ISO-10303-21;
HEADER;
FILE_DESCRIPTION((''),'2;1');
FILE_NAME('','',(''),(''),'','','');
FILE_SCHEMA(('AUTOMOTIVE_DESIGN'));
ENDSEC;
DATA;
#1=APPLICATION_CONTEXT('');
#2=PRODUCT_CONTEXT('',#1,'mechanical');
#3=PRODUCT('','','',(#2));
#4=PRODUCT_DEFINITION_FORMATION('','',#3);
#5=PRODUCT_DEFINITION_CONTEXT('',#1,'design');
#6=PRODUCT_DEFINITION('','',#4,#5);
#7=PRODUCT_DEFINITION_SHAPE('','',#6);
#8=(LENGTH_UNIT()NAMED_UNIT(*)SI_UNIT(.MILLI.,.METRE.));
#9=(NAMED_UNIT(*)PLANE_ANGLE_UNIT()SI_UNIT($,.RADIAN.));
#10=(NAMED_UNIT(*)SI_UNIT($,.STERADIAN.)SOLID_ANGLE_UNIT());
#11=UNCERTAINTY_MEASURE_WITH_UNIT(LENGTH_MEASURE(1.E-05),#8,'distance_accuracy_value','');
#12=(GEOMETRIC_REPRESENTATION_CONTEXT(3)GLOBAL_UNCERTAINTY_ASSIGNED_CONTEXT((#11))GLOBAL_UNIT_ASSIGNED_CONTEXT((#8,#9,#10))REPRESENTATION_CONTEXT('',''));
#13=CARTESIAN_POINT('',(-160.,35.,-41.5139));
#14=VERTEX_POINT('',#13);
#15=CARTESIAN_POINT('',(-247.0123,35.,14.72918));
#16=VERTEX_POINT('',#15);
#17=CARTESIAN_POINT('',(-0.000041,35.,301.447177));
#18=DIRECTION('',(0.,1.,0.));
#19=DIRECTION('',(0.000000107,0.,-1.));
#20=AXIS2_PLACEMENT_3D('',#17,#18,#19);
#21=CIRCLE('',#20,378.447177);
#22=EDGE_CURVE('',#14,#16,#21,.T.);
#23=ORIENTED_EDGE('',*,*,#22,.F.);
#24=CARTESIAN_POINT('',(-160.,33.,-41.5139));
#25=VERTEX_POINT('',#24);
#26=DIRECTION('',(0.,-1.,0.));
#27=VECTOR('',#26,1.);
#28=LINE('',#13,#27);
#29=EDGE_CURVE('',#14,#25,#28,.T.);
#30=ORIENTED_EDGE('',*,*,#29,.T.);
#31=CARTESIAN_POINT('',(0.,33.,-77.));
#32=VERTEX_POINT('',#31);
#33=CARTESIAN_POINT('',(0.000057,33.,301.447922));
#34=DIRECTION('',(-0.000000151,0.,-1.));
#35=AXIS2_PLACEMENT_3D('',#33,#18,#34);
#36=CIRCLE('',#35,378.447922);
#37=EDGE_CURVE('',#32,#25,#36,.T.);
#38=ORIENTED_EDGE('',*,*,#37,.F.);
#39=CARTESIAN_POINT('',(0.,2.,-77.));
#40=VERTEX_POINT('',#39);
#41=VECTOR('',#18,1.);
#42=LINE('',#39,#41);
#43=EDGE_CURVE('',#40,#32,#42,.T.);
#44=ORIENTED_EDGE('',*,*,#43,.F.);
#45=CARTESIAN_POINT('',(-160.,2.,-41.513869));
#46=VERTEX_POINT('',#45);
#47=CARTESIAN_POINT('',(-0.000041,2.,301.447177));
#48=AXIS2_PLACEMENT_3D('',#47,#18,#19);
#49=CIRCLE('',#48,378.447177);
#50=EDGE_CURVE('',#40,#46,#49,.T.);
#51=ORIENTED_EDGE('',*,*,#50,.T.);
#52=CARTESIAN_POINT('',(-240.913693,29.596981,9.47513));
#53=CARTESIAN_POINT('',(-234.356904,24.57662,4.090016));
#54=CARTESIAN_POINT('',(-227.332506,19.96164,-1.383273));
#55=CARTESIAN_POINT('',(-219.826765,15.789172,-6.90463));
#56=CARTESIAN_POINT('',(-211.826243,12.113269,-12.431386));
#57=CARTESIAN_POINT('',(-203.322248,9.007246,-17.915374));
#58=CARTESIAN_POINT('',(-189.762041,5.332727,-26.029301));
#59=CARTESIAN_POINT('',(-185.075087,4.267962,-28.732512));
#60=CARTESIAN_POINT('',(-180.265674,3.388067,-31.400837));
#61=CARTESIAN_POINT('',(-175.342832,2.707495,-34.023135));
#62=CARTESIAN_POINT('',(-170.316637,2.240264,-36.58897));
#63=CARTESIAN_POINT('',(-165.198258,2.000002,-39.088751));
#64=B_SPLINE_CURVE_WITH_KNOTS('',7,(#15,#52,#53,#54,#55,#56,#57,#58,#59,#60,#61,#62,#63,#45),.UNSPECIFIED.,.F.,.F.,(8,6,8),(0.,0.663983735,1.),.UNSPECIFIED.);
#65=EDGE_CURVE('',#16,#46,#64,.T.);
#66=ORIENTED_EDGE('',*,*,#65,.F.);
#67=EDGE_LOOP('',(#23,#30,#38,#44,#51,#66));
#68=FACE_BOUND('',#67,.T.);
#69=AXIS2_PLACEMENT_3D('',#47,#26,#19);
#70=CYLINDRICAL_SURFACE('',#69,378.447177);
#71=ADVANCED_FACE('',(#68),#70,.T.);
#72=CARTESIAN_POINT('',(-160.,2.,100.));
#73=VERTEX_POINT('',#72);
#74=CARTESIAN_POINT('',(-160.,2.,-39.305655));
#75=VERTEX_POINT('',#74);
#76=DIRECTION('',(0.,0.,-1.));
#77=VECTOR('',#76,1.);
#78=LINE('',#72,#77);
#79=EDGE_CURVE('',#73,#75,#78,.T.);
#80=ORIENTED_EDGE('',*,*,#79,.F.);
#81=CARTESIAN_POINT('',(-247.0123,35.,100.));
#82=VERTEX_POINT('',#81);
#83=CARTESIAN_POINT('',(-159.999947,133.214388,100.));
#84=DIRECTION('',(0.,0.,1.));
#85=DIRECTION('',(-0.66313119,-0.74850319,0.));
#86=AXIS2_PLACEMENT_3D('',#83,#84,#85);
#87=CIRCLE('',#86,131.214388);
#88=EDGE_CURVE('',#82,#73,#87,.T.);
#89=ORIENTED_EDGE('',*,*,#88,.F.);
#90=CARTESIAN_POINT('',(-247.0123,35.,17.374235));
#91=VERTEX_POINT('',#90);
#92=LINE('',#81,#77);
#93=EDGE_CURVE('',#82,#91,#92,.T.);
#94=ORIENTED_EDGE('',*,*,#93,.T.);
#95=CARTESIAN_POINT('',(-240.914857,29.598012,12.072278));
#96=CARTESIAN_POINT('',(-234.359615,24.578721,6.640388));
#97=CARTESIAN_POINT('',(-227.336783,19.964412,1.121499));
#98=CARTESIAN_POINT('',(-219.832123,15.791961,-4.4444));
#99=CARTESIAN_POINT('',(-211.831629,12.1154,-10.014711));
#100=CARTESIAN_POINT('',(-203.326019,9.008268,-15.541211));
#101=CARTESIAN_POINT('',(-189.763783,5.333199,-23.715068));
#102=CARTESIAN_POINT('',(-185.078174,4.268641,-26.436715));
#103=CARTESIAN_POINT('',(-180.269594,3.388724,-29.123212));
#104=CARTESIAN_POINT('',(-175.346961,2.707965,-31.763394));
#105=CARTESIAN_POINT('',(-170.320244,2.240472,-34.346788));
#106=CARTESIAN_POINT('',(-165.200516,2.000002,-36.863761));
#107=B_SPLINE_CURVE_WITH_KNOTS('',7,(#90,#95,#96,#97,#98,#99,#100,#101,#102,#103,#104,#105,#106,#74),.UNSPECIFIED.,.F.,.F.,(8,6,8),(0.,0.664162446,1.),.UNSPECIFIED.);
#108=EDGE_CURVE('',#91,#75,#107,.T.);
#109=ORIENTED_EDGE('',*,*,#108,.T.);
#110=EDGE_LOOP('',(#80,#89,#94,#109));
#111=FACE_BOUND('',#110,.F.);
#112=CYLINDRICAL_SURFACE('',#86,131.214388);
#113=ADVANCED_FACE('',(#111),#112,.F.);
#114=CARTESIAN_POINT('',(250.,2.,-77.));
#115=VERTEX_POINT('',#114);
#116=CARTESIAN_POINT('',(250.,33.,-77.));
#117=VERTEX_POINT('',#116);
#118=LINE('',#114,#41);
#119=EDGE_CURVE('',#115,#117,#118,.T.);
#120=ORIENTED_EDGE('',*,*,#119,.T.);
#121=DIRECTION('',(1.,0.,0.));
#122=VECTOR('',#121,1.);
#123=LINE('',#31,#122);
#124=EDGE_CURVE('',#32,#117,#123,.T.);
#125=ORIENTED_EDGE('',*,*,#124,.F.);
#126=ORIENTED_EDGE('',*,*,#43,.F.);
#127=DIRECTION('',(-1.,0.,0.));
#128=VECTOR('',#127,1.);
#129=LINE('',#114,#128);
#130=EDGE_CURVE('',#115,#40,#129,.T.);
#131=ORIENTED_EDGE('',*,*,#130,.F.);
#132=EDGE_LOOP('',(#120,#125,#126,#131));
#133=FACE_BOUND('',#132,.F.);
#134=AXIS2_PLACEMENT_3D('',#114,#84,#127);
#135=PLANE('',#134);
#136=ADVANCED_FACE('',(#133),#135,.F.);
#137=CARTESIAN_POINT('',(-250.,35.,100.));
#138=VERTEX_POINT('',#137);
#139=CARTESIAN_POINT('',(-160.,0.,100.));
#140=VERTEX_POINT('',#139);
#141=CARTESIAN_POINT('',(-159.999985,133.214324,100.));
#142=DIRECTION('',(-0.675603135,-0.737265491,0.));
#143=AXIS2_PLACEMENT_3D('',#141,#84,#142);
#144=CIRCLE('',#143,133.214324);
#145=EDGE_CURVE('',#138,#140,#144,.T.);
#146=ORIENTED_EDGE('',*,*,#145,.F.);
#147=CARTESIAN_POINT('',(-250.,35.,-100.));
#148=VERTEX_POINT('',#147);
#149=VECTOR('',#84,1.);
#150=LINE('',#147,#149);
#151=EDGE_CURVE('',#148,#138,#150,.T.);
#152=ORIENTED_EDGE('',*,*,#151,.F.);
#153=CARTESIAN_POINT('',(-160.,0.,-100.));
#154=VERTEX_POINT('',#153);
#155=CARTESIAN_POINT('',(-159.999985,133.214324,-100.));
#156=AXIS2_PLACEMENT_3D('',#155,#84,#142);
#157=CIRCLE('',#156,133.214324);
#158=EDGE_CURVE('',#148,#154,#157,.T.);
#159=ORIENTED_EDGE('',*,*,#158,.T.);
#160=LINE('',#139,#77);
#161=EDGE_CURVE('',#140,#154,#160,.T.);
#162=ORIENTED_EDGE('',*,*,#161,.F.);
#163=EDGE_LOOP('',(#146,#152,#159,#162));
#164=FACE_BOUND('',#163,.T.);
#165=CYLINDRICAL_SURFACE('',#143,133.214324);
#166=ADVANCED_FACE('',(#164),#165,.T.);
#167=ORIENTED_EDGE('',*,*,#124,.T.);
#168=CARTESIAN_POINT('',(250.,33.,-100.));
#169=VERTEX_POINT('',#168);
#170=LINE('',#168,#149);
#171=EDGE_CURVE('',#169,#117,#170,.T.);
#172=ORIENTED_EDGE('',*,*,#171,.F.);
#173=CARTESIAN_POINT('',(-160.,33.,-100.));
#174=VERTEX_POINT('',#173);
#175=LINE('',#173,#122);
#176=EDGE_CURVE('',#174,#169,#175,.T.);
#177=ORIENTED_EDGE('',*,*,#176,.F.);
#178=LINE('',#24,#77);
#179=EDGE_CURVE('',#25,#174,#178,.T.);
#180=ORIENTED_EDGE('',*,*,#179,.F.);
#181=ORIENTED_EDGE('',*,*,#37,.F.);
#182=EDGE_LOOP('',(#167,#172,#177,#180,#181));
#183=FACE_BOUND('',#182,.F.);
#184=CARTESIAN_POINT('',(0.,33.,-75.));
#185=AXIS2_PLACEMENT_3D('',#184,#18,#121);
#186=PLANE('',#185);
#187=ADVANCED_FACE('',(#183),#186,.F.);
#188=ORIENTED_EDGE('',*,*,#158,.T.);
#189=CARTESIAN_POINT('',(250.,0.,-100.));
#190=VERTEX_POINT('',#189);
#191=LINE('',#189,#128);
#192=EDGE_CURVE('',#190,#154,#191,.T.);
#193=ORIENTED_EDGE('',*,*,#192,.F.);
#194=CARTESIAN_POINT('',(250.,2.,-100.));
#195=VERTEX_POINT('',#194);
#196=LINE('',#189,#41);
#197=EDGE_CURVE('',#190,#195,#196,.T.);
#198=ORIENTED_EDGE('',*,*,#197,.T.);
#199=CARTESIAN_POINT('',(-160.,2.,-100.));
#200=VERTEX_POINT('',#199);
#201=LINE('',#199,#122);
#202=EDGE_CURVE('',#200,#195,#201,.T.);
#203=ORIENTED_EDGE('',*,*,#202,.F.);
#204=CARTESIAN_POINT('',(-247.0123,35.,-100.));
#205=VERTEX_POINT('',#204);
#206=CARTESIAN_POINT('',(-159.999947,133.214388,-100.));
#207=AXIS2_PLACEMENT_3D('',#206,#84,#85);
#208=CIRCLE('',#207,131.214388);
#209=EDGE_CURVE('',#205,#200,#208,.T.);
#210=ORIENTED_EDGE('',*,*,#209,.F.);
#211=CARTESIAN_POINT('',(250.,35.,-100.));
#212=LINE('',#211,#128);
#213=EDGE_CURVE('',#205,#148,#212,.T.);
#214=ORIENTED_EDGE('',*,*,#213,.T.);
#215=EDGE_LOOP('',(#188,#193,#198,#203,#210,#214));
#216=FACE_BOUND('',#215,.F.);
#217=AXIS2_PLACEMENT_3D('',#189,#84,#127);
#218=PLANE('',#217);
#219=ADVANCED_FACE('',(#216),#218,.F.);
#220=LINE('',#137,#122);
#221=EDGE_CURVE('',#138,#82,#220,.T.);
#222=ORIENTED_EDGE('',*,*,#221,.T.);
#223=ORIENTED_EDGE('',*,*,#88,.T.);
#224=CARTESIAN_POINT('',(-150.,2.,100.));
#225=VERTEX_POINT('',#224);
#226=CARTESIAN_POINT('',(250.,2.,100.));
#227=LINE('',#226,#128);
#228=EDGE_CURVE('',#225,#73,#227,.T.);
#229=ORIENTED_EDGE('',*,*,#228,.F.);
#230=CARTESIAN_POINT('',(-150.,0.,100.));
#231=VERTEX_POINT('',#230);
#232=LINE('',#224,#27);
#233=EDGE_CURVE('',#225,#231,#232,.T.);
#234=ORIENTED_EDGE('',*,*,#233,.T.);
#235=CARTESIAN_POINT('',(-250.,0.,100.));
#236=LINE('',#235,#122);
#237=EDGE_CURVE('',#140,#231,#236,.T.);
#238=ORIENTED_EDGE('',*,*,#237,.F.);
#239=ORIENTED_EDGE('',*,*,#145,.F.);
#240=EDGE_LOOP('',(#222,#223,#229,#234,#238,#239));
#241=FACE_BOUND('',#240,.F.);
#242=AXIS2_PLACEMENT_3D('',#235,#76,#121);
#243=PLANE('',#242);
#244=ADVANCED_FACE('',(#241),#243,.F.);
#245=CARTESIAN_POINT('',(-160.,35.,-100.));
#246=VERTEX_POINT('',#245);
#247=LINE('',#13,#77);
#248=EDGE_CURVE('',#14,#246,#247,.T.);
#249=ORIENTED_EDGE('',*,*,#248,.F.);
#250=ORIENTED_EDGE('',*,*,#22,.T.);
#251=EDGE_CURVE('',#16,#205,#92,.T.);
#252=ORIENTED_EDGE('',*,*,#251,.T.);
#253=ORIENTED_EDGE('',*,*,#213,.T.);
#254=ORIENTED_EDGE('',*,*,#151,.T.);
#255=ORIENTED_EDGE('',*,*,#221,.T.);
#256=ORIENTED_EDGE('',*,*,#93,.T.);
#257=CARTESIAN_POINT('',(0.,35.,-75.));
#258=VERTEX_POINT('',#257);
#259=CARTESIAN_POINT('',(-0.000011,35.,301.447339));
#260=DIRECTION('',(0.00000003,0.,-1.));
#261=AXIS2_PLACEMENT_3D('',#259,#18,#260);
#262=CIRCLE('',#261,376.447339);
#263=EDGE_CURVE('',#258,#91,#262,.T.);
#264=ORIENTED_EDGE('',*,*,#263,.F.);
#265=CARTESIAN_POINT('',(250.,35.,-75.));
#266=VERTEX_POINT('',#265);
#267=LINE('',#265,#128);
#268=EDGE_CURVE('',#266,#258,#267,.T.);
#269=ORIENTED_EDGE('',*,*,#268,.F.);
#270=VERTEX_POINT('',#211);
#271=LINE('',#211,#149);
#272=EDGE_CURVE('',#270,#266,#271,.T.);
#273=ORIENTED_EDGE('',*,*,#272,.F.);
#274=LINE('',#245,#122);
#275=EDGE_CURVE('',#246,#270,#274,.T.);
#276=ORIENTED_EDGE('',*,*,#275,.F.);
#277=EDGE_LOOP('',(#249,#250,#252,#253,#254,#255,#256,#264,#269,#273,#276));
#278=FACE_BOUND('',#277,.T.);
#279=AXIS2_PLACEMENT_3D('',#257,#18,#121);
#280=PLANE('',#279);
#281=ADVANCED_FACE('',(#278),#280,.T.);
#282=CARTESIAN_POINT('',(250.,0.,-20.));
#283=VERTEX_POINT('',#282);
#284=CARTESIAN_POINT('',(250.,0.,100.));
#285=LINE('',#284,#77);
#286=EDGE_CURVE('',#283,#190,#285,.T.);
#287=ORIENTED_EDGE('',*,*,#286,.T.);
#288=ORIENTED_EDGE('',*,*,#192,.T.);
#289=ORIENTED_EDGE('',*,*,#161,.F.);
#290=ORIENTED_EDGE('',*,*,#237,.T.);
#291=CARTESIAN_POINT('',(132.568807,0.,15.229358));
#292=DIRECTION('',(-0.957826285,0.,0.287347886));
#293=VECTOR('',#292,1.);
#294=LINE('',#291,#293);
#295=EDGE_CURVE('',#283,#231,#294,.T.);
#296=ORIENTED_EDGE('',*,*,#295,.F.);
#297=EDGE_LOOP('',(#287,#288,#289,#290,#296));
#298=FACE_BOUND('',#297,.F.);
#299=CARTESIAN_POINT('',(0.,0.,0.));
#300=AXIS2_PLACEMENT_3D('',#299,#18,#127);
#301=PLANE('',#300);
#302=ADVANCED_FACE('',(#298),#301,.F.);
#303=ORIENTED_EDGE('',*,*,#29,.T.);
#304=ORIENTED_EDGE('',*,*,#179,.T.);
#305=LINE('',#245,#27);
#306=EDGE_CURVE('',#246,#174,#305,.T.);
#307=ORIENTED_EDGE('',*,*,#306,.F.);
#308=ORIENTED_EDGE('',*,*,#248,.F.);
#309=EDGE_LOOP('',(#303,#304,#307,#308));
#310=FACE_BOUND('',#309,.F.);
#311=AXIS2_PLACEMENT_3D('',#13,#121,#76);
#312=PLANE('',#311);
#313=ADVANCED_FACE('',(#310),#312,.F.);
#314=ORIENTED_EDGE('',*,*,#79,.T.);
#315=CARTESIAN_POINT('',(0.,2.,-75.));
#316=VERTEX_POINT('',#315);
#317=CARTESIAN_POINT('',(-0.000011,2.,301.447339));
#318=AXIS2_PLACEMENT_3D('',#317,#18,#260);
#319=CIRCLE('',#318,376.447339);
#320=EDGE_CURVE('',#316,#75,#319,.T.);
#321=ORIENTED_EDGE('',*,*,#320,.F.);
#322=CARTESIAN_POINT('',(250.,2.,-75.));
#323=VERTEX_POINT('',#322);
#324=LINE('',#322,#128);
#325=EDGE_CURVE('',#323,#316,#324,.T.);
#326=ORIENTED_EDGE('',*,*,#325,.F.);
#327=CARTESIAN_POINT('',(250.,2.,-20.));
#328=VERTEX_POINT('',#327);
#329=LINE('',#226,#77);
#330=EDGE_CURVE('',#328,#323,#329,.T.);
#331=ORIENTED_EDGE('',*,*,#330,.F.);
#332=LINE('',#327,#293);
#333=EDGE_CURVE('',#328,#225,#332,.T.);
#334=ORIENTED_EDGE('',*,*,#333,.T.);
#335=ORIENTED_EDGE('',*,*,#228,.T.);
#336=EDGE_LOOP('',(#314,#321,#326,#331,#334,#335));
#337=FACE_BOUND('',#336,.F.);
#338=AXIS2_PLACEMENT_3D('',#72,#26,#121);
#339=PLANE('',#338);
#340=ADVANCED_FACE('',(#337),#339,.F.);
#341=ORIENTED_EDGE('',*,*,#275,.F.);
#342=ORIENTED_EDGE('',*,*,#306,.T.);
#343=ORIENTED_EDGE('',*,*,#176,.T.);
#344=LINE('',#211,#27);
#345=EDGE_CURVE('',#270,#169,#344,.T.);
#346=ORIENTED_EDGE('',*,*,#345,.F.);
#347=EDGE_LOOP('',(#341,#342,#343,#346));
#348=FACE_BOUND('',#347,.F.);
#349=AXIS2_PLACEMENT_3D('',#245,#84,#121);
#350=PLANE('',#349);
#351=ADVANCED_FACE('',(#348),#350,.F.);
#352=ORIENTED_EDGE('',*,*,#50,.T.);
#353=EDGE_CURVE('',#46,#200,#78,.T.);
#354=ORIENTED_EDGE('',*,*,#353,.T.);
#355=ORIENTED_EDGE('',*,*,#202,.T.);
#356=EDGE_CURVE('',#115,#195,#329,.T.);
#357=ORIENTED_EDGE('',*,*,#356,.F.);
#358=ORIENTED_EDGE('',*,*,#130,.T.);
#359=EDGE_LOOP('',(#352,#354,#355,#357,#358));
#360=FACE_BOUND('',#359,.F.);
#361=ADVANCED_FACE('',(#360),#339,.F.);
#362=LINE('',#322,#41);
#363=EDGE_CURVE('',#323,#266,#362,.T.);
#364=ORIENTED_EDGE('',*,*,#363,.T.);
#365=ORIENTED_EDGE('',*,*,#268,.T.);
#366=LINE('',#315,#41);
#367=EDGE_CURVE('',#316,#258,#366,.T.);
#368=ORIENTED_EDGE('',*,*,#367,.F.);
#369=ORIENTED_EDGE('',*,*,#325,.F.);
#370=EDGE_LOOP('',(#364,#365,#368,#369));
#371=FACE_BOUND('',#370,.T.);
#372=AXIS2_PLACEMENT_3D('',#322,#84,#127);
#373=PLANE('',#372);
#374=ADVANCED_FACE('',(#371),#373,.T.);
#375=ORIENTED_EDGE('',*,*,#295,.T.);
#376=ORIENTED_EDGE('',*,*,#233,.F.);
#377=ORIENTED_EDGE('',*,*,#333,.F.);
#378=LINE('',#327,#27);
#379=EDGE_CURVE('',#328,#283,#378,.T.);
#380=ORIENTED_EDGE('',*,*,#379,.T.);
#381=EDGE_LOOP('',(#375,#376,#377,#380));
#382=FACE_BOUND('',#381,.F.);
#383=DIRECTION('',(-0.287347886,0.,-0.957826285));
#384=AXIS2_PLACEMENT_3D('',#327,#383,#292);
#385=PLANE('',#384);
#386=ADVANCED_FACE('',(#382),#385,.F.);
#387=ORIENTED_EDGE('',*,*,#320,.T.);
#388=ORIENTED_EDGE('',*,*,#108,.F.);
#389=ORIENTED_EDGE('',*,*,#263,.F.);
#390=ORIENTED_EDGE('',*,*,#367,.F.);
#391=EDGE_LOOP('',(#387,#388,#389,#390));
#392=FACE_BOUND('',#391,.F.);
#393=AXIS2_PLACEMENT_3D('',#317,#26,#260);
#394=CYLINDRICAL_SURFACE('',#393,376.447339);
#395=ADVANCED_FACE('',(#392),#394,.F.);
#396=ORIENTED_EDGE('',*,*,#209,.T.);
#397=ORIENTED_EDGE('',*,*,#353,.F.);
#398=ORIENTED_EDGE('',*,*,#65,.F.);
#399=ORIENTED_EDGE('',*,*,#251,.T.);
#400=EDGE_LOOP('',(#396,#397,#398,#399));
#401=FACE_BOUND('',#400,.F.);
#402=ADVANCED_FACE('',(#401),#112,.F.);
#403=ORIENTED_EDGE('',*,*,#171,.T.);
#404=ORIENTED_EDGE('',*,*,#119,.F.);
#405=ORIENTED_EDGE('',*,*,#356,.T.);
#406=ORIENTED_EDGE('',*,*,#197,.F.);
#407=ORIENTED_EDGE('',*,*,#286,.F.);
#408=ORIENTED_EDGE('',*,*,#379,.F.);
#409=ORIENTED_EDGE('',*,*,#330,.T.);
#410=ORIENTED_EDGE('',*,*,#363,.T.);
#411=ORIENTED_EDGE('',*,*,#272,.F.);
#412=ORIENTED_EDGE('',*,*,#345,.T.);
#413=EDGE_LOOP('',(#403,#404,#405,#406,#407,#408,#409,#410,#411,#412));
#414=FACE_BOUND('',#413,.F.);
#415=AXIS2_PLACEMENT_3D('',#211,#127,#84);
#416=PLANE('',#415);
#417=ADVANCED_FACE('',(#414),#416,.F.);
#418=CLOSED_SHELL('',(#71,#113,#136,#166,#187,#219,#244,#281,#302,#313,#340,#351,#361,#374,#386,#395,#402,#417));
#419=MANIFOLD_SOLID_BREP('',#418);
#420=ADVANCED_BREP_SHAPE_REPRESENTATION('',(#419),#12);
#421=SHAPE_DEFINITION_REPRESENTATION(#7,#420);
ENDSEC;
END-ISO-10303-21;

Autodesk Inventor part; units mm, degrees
ref_plane "YZ Plane" through (0, 0, 0) normal (1, 0, 0) x (0, 1, 0)
ref_plane "XZ Plane" through (0, 0, 0) normal (0, 1, 0) x (-1, 0, 0)
ref_plane "XY Plane" through (0, 0, 0) normal (0, 0, 1) x (1, 0, 0)
sketch "スケッチ1" plane through (0, 0, 0) normal (0, 1, 0) x (-1, 0, 0)
  line L0 (250, 100) -> (-250, 100)
  line L1 (-250, 100) -> (-250, -100)
  line L2 (-250, -100) -> (250, -100)
  line L3 (250, -100) -> (250, 100)
  point P0 (0, 0)
  dimension "d2" = 250
  dimension "d3" = 500
  dimension "d4" = 100
  dimension "d5" = 200
extrude "押し出し1" add sketch "スケッチ1" along normal blind 35
sketch "スケッチ2" plane through (-250, 0, 100) normal (0, 0, 1) x (1, 0, 0)
  line L0 (0, 35) -> (500, 35) projected
  line L1 (0, 0) -> (500, 0) projected
  arc A0 (0, 35) -> (90, 0) centre (90, 133.2143) ccw
  line L2 (0, 0) -> (0, 35) projected
  point P0 (250, 0)
  dimension "d8" = 90
extrude "押し出し2" cut sketch "スケッチ2" against normal through all
sketch "スケッチ5" plane through (-160, 0, 100) normal (0, 0, 1) x (1, 0, 0)
  arc A0 (-90, 35) -> (0, 0) centre (0, 133.2143) ccw projected
  line L0 (0, 0) -> (410, 0) projected
  arc A1 (-87.0123, 35) -> (0, 2) centre (0, 133.2143) ccw
  line L1 (0, 2) -> (54.4195, 2)
  line L2 (54.4195, 2) -> (410, 2)
  line L3 (-90, 35) -> (410, 35) projected
  line L4 (410, 0) -> (410, 35) projected
  point P0 (160, 0)
  point P1 (40, 35)
  dimension "d20" = 2
extrude "押し出し5" cut sketch "スケッチ5" against normal through all contours L3 L4 L2 L1 A1
sketch "スケッチ8" plane through (-160, 2, 100) normal (0, 1, 0) x (1, 0, 0)
  line L0 (410, 175) -> (160, 175)
  line L1 (410, 200) -> (410, 0) projected
  line L2 (0, 200) -> (410, 200) projected
  arc A0 (160, 175) -> (-90, 80) centre (160, -201.4474) ccw
  line L3 (-90, 200) -> (-90, 0) projected
  line L4 (-87.0123, 200) -> (0, 200) projected
  line L5 (-87.0123, 200) -> (-90, 200) projected
  line L6 (410, 177) -> (160, 177)
  arc A1 (160, 177) -> (-90, 82.6695) centre (160, -201.4474) ccw
  line L7 (410, 175) -> (410, 177)
  line L8 (410, 0) -> (410, 200) projected
  line L9 (-90, 82.6695) -> (-90, 80)
  point P0 (160, 100)
  dimension "d35" = 25
  dimension "d36" = 120
  dimension "d37" = 250
  dimension "d38" = 2
extrude "押し出し7" add sketch "スケッチ8" along normal up to surface (33 mm away) contours L0 A0 L3 A1 L6 L1
delete faces "面を削除1" heal yes whole lump no faces at (-239.2435, 9.8792, 10.8013) (-250, 24, 18.2203) (-242.947, 2, 13.2909) (-239.2361, 9.8796, 8.2094)
sketch "スケッチ9" plane through (0, 35, -75) normal (0, 1, 0) x (1, 0, 0)
  line L0 (250, 25) -> (250, 2) projected
  line L1 (0, 2) -> (250, 2) projected
  line L2 (250, 25) -> (250, 2) projected
  line L3 (-160, 25) -> (250, 25) projected
  line L4 (-160, -33.4861) -> (-160, 25) projected
  arc A0 (0, 2) -> (-160, -33.4861) centre (0, -376.4474) ccw projected
  point P0 (0, -75)
extrude "押し出し8" add sketch "スケッチ9" against normal blind 2
sketch "スケッチ10" plane through (-160, 2, 100) normal (0, 1, 0) x (1, 0, 0)
  line L0 (410, 175) -> (410, 0) projected
  line L1 (410, 0) -> (0, 0) projected
  line L2 (410, 0) -> (410, 200) projected
  line L3 (410, 120) -> (10, 0)
  line L4 (0, 0) -> (410, 0) projected
  point P0 (160, 100)
  dimension "d43" = 400
  dimension "d44" = 120
extrude "押し出し9" cut sketch "スケッチ10" against normal through all
properties part number "endplate_ver2"
